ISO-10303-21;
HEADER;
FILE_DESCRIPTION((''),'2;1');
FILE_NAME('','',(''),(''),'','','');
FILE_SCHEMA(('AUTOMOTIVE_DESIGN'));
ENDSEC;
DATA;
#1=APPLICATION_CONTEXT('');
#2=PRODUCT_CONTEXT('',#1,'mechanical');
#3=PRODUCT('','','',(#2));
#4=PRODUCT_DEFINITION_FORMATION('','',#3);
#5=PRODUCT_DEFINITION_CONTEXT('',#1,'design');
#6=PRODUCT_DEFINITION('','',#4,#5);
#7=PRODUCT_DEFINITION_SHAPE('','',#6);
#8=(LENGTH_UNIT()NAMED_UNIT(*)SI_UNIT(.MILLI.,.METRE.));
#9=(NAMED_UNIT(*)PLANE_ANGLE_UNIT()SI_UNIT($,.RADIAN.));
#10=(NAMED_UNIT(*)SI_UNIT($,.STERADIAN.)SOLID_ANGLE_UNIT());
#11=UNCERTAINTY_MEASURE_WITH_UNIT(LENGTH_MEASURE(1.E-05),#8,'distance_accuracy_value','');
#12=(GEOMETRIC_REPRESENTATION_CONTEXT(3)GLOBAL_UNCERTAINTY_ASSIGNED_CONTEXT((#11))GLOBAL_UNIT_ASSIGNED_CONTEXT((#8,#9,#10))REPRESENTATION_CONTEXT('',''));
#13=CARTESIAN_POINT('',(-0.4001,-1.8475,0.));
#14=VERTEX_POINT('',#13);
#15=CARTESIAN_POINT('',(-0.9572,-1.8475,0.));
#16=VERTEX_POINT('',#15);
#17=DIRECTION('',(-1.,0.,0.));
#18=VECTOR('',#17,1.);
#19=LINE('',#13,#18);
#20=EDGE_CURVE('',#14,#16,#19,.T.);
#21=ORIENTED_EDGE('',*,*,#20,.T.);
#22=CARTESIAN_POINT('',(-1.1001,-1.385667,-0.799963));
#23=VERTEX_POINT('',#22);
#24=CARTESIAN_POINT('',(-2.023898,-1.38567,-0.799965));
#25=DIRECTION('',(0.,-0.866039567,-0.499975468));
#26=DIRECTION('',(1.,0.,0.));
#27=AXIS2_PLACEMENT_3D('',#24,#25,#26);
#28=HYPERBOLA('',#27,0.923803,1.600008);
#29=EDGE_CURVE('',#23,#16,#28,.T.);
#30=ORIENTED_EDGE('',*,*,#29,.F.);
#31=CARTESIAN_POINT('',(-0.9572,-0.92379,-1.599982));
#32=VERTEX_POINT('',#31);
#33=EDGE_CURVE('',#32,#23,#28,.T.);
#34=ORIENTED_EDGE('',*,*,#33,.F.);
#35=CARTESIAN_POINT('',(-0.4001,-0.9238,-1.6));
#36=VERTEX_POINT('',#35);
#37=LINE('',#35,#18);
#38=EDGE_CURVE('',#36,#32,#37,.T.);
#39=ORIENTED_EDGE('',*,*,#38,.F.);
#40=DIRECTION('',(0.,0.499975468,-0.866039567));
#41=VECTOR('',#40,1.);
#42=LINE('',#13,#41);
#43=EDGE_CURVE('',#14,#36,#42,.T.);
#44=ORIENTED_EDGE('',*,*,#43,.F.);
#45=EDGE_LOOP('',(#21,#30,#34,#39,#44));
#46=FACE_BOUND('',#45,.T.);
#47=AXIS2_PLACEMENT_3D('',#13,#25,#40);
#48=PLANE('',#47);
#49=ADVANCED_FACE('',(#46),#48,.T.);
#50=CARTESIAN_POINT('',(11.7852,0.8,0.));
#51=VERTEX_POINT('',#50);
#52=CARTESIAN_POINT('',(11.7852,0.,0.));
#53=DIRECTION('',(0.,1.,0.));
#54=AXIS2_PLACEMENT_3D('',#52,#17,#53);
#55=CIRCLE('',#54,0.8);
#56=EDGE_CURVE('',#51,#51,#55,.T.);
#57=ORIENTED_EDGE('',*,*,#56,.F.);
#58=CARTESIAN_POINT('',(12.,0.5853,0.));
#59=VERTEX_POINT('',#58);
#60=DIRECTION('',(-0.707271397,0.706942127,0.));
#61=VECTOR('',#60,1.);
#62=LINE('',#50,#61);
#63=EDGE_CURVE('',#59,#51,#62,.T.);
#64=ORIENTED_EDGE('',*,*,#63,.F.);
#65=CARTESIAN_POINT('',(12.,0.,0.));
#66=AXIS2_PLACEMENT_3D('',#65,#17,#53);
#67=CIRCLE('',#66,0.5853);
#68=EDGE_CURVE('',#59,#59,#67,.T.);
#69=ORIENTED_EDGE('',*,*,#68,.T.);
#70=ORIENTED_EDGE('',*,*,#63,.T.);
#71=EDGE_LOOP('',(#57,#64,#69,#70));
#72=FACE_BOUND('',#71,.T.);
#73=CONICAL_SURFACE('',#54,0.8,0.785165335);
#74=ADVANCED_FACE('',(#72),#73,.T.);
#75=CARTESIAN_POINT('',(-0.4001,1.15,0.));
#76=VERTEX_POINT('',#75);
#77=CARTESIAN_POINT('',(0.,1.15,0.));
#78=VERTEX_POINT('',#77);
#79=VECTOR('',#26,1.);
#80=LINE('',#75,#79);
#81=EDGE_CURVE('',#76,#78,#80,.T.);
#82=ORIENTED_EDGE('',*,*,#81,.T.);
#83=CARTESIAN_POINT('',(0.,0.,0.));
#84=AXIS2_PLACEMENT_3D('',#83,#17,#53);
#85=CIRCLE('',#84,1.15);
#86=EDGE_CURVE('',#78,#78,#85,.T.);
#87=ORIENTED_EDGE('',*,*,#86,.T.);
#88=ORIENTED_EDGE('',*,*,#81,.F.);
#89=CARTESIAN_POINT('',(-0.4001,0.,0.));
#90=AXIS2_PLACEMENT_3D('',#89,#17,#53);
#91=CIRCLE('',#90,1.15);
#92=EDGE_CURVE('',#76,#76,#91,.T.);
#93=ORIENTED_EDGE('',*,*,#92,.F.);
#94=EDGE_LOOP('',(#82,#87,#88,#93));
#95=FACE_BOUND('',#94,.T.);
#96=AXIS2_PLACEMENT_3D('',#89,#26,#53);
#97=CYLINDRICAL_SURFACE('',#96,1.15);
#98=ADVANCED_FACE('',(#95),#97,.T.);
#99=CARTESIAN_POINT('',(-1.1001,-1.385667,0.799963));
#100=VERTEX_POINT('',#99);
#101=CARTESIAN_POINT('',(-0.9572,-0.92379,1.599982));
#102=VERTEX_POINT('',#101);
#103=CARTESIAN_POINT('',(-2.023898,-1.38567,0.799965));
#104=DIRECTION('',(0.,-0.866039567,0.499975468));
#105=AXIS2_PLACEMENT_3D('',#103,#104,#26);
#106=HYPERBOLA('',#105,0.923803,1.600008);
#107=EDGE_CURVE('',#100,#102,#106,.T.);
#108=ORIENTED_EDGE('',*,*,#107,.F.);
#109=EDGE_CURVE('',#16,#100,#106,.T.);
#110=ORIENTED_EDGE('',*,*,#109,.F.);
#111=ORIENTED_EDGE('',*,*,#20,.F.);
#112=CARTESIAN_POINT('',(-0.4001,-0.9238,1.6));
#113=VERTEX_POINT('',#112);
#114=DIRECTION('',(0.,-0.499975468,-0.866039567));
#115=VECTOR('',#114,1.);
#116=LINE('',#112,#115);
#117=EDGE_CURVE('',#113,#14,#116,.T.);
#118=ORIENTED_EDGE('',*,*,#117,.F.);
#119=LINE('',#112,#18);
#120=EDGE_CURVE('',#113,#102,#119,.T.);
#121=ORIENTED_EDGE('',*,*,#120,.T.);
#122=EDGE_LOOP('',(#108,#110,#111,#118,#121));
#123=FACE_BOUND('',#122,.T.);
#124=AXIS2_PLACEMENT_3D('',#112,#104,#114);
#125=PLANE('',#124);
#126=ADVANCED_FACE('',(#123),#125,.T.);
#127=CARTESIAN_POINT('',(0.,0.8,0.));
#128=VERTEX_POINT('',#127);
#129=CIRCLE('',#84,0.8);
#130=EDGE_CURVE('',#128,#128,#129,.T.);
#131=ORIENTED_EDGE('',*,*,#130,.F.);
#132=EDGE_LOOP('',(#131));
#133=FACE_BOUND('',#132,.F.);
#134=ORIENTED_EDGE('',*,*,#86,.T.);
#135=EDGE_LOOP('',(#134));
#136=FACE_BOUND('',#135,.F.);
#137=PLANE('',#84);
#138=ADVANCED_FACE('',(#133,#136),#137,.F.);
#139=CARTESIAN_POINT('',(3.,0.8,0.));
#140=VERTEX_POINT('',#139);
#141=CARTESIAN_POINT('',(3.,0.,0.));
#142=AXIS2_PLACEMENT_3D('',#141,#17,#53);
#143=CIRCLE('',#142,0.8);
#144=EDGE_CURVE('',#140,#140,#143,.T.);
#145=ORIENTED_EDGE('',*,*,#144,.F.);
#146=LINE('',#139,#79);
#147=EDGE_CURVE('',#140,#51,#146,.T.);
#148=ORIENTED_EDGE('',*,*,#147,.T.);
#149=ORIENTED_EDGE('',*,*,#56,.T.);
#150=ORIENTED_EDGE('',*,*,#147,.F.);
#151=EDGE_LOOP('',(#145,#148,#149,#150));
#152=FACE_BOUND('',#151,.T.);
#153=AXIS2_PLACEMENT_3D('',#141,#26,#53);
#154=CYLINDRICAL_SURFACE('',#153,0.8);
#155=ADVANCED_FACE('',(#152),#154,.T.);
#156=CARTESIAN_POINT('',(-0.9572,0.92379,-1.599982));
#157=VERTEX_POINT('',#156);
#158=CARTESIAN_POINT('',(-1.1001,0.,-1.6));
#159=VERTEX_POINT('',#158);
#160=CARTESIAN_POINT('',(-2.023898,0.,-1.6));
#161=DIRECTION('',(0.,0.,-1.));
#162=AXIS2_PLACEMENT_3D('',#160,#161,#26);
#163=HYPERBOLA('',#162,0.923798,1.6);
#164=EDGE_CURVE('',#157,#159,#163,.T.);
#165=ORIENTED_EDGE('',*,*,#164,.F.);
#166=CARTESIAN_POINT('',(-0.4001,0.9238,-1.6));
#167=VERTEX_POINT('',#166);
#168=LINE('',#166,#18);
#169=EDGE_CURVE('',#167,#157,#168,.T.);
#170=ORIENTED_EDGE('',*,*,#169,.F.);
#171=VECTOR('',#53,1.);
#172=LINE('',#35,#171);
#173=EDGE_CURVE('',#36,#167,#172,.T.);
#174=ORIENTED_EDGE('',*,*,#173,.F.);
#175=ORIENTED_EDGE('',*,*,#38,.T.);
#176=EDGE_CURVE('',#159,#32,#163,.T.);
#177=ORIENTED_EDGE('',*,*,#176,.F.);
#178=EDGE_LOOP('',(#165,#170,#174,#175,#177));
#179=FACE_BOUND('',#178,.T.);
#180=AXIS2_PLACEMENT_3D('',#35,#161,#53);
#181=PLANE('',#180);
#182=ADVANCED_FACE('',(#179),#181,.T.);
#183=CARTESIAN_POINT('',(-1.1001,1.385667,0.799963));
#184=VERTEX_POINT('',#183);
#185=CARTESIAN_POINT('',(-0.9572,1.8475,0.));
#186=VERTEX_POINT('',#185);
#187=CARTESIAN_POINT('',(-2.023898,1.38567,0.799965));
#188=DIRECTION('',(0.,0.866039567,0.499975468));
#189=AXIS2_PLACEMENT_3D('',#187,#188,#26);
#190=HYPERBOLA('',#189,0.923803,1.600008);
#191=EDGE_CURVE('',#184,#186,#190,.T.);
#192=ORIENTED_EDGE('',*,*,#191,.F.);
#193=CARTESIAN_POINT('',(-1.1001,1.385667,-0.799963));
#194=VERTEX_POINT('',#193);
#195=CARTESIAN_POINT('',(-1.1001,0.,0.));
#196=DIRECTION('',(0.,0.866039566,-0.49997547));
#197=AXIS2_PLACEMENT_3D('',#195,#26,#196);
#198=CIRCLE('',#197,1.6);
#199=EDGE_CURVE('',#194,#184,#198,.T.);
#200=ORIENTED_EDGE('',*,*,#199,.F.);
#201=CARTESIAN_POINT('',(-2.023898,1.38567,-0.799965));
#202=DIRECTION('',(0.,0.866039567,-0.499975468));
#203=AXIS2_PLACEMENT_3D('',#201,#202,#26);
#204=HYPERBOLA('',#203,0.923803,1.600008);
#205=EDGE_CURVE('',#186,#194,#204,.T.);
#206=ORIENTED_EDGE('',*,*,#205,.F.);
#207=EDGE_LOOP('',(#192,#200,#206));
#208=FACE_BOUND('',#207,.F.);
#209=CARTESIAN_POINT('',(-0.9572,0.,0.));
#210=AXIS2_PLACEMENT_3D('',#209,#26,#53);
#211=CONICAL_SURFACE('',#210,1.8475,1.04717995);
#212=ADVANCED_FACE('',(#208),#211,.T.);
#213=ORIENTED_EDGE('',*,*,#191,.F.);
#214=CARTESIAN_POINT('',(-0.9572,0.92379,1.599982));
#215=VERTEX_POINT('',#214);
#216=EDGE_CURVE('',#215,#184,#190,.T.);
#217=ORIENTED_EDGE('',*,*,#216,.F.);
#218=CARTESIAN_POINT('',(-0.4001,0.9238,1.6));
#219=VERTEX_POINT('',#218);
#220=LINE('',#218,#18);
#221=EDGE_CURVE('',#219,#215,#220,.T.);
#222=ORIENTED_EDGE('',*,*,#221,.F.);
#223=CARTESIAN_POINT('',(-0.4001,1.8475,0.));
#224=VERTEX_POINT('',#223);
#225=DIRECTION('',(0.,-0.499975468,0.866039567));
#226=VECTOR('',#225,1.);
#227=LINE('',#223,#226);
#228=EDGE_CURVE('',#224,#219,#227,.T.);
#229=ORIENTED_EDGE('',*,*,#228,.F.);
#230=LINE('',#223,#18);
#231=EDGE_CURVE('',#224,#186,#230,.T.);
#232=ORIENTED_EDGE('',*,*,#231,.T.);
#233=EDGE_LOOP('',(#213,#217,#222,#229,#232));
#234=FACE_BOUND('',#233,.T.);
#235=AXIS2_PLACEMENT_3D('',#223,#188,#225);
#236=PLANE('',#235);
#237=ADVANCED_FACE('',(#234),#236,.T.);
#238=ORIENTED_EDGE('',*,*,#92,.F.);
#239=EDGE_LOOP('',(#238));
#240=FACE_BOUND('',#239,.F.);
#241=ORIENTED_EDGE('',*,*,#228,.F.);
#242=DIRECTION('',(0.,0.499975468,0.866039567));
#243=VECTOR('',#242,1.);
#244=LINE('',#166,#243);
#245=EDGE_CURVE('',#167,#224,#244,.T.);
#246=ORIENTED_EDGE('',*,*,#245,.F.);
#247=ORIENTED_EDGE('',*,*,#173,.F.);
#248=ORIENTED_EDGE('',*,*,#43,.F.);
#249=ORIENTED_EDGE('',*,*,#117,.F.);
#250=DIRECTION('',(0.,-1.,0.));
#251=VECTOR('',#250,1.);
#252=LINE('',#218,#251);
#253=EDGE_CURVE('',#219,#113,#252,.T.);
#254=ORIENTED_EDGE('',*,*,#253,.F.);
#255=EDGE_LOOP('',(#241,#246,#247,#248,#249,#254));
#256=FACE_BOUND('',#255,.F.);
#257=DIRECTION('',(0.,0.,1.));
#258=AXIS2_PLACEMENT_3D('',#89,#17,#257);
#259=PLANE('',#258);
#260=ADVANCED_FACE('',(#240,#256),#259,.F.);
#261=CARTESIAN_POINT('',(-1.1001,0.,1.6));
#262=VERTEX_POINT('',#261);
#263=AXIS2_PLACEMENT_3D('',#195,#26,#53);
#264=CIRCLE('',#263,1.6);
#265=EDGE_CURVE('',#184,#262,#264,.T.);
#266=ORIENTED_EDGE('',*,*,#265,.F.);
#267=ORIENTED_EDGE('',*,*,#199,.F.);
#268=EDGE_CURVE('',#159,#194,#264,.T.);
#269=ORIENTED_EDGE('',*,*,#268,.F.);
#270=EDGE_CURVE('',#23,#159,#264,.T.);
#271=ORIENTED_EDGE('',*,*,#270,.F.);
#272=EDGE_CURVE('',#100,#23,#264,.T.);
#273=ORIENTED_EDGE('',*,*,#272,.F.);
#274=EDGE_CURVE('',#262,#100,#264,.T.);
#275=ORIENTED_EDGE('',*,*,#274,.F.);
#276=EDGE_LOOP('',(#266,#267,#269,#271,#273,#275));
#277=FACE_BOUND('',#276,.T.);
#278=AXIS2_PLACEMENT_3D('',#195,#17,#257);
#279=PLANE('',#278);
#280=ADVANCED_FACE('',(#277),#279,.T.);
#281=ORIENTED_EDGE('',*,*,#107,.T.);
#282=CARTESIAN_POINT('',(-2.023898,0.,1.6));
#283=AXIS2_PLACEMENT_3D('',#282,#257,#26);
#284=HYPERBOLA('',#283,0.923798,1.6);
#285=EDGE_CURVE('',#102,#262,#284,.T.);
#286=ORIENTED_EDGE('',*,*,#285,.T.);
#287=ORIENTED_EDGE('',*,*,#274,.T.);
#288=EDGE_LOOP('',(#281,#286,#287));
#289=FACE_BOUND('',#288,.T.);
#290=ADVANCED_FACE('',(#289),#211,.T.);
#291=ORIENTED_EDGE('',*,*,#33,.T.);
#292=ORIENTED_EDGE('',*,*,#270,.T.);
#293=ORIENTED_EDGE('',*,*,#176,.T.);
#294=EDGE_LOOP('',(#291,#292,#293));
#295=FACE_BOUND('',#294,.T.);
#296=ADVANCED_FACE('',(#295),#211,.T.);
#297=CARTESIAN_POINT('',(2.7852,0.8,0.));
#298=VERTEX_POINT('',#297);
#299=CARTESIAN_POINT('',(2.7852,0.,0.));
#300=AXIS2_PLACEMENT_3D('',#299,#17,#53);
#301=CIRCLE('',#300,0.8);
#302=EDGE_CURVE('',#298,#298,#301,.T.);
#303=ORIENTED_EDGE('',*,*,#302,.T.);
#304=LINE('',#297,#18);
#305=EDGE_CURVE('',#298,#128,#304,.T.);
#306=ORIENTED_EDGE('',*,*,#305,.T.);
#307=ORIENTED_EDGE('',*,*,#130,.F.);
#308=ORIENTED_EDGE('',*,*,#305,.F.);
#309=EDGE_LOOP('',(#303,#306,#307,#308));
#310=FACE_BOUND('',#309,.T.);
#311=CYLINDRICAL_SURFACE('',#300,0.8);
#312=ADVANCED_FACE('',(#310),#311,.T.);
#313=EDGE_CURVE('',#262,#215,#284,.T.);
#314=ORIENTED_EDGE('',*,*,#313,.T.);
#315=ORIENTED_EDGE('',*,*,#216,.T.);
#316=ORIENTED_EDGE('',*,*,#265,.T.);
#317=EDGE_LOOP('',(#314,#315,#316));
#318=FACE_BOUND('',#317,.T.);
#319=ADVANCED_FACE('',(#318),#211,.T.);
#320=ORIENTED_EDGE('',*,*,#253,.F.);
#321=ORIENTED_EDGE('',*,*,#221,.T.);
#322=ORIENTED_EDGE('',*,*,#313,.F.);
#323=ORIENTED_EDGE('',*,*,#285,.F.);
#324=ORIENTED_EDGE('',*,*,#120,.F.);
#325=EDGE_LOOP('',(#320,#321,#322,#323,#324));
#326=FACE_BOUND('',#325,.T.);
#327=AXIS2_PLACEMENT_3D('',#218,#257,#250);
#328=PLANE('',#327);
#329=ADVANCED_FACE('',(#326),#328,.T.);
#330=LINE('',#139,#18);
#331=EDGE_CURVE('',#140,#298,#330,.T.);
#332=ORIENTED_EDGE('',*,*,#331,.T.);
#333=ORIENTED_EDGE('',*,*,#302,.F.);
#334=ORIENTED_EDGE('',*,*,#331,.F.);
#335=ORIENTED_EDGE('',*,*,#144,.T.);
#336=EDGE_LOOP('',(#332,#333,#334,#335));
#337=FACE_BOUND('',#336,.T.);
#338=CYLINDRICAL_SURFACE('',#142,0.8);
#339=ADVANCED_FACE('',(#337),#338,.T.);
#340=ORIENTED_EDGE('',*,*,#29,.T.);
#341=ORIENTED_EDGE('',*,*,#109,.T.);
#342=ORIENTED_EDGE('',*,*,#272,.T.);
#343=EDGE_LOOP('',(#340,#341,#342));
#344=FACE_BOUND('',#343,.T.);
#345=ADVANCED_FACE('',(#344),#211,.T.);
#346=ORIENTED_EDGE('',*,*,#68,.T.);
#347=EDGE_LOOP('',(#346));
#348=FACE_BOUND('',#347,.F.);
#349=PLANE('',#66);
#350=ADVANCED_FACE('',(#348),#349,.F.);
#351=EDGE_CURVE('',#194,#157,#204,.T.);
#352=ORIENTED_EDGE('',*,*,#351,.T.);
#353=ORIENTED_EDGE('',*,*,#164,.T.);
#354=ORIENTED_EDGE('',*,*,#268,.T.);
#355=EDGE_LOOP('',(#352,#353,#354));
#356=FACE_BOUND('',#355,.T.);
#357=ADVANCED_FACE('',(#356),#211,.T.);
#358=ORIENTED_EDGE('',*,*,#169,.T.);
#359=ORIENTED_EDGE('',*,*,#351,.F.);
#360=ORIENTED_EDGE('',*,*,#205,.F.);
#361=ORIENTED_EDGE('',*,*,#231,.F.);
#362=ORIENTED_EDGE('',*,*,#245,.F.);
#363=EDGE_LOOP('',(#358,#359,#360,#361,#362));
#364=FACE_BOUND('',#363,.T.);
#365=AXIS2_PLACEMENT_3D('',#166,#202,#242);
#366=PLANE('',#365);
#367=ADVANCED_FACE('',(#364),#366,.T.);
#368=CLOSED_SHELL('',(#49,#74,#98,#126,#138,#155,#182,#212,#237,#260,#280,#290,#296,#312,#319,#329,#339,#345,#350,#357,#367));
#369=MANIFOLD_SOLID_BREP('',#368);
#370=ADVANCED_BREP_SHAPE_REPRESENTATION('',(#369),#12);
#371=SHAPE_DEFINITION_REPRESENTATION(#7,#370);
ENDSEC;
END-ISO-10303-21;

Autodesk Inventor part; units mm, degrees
ref_plane "YZ Plane" through (0, 0, 0) normal (1, 0, 0) x (0, 1, 0)
ref_plane "XZ Plane" through (0, 0, 0) normal (0, 1, 0) x (-1, 0, 0)
sketch "Szkic1" plane through (0, 0, 0) normal (0, 0, 1) x (1, 0, 0)
  line L0 (0, 1.15) -> (0, 0.8)
  line L1 (3, 0.8) -> (12, 0.8)
  line L2 (12, 0.8) -> (12, 0)
  line L3 (12, 0) -> (-0.4001, 0)
  line L4 (-2.8801, 0) -> (14.48, 0) projected
  line L5 (-0.4001, 0) -> (-0.4001, 1.15)
  line L6 (-0.4001, 1.15) -> (0, 1.15)
  line L7 (3, 0.8) -> (2.7852, 0.8)
  line L8 (2.7852, 0.8) -> (0, 0.8)
  line L9 (0, -0.23) -> (0, 1.38) projected
  dimension "d0" = 12
  dimension "d1" = 9
  dimension "d2" = 1.6
  dimension "d9" = 0.4001
  dimension "d10" = 2.3
  dimension "d13" = 0.2148
  dimension "d14" = 1.6
revolve "Bryła" add sketch "Szkic1" angle 360 about axis through (12, 0, 0) along (-1, 0, 0)
sketch "Szkic2" plane through (-0.4001, 0, 0) normal (-1, 0, 0) x (0, 0, 1)
  line L0 (0, 1.8475) -> (1.6, 0.9238)
  line L1 (1.6, 0.9238) -> (1.6, -0.9238)
  line L2 (1.6, -0.9238) -> (0, -1.8475)
  line L3 (0, -1.8475) -> (-1.6, -0.9238)
  line L4 (-1.6, -0.9238) -> (-1.6, 0.9238)
  line L5 (-1.6, 0.9238) -> (0, 1.8475)
  point P0 (0, 0)
  point P1 (0, 0)
  dimension "d11" = 3.2
extrude "Głowica" add sketch "Szkic2" along normal blind 0.7
sketch "Szkic4" plane through (0, 0, 0) normal (0, 0, 1) x (1, 0, 0)
  line L0 (-1.1001, 1.6) -> (-1.1001, 1.8475)
  line L1 (-1.1001, 1.8475) -> (-0.9572, 1.8475)
  line L2 (-0.9572, 1.8475) -> (-1.1001, 1.6)
  line L3 (-1.2401, 0) -> (-0.2601, 0) projected
  line L4 (-0.4001, 1.8475) -> (-1.1001, 1.8475) projected
  line L5 (-1.1001, 0.9238) -> (-1.1001, 1.8475) projected
  dimension "d5" = 30
  dimension "d19" = 3.2
revolve "Faza1" cut sketch "Szkic4" angle 360 about axis through (-10, 0, 0) along (1, 0, 0)
thread "Gwint" size "M1.6x0.35" class "6g" standard "ISO Metric profile" length 9
chamfer "Faza2" distance 0.2147 distance2 0.2148 1 edges at (12, -0.8, 0) measured on face at (12, -0.5608, 0.0725)
ref_plane "Work Plane1" through (1.525, 0, 0) normal (0, 0, 1) x (1, 0, 0)
equation "\"d11\" = SW"
equation "\"d3\" = KOH - SD"
equation "\"d15\" = GEL"
equation "\"d6\" = -0.5 * SPD + 0.5 * GD"
equation "\"d0\" = NLG"
equation "\"d1\" = GEL"
equation "\"d2\" = GD"
equation "\"d10\" = SD2"
equation "\"d14\" = BDM"
equation "\"d5\" = ANG1"
equation "\"d19\" = SW0"
equation "\"NLG\" = 12"
equation "\"GD\" = NND"
equation "\"BDM\" = NND"
equation "\"KOH\" = 1.1"
equation "\"GEL\" = 9"
equation "\"SW\" = 3.2"
equation "\"SW0\" = SW"
equation "\"SPD\" = NND - 1.2269 * PTC"
equation "\"SD2\" = 2.3"
equation "\"SD\" = 0.4"
equation "\"ANG1\" = 30deg"
equation "\"GAL\" = 0.61345 * PTC"
equation "\"GUL\" = 0.61345 * PTC"
equation "\"RR\" = 0.1"
equation "\"WFT\" = SD"
equation "\"GD1\" = THREADDIA - 1.2269 * PTC"
equation "\"THREADDIA\" = 1.6"
equation "\"SDH\" = 2.3"
equation "\"TOA\" = 30deg"
equation "\"FAWI\" = 45deg"
equation "\"PTC\" = 0.35"
equation "\"NND\" = 1.6"
equation "\"E0\" = 1.155 * SW"
properties part number "Śruba M1,6x12-8.8-A PN-85/M-82101" material "Stal, miękka"
